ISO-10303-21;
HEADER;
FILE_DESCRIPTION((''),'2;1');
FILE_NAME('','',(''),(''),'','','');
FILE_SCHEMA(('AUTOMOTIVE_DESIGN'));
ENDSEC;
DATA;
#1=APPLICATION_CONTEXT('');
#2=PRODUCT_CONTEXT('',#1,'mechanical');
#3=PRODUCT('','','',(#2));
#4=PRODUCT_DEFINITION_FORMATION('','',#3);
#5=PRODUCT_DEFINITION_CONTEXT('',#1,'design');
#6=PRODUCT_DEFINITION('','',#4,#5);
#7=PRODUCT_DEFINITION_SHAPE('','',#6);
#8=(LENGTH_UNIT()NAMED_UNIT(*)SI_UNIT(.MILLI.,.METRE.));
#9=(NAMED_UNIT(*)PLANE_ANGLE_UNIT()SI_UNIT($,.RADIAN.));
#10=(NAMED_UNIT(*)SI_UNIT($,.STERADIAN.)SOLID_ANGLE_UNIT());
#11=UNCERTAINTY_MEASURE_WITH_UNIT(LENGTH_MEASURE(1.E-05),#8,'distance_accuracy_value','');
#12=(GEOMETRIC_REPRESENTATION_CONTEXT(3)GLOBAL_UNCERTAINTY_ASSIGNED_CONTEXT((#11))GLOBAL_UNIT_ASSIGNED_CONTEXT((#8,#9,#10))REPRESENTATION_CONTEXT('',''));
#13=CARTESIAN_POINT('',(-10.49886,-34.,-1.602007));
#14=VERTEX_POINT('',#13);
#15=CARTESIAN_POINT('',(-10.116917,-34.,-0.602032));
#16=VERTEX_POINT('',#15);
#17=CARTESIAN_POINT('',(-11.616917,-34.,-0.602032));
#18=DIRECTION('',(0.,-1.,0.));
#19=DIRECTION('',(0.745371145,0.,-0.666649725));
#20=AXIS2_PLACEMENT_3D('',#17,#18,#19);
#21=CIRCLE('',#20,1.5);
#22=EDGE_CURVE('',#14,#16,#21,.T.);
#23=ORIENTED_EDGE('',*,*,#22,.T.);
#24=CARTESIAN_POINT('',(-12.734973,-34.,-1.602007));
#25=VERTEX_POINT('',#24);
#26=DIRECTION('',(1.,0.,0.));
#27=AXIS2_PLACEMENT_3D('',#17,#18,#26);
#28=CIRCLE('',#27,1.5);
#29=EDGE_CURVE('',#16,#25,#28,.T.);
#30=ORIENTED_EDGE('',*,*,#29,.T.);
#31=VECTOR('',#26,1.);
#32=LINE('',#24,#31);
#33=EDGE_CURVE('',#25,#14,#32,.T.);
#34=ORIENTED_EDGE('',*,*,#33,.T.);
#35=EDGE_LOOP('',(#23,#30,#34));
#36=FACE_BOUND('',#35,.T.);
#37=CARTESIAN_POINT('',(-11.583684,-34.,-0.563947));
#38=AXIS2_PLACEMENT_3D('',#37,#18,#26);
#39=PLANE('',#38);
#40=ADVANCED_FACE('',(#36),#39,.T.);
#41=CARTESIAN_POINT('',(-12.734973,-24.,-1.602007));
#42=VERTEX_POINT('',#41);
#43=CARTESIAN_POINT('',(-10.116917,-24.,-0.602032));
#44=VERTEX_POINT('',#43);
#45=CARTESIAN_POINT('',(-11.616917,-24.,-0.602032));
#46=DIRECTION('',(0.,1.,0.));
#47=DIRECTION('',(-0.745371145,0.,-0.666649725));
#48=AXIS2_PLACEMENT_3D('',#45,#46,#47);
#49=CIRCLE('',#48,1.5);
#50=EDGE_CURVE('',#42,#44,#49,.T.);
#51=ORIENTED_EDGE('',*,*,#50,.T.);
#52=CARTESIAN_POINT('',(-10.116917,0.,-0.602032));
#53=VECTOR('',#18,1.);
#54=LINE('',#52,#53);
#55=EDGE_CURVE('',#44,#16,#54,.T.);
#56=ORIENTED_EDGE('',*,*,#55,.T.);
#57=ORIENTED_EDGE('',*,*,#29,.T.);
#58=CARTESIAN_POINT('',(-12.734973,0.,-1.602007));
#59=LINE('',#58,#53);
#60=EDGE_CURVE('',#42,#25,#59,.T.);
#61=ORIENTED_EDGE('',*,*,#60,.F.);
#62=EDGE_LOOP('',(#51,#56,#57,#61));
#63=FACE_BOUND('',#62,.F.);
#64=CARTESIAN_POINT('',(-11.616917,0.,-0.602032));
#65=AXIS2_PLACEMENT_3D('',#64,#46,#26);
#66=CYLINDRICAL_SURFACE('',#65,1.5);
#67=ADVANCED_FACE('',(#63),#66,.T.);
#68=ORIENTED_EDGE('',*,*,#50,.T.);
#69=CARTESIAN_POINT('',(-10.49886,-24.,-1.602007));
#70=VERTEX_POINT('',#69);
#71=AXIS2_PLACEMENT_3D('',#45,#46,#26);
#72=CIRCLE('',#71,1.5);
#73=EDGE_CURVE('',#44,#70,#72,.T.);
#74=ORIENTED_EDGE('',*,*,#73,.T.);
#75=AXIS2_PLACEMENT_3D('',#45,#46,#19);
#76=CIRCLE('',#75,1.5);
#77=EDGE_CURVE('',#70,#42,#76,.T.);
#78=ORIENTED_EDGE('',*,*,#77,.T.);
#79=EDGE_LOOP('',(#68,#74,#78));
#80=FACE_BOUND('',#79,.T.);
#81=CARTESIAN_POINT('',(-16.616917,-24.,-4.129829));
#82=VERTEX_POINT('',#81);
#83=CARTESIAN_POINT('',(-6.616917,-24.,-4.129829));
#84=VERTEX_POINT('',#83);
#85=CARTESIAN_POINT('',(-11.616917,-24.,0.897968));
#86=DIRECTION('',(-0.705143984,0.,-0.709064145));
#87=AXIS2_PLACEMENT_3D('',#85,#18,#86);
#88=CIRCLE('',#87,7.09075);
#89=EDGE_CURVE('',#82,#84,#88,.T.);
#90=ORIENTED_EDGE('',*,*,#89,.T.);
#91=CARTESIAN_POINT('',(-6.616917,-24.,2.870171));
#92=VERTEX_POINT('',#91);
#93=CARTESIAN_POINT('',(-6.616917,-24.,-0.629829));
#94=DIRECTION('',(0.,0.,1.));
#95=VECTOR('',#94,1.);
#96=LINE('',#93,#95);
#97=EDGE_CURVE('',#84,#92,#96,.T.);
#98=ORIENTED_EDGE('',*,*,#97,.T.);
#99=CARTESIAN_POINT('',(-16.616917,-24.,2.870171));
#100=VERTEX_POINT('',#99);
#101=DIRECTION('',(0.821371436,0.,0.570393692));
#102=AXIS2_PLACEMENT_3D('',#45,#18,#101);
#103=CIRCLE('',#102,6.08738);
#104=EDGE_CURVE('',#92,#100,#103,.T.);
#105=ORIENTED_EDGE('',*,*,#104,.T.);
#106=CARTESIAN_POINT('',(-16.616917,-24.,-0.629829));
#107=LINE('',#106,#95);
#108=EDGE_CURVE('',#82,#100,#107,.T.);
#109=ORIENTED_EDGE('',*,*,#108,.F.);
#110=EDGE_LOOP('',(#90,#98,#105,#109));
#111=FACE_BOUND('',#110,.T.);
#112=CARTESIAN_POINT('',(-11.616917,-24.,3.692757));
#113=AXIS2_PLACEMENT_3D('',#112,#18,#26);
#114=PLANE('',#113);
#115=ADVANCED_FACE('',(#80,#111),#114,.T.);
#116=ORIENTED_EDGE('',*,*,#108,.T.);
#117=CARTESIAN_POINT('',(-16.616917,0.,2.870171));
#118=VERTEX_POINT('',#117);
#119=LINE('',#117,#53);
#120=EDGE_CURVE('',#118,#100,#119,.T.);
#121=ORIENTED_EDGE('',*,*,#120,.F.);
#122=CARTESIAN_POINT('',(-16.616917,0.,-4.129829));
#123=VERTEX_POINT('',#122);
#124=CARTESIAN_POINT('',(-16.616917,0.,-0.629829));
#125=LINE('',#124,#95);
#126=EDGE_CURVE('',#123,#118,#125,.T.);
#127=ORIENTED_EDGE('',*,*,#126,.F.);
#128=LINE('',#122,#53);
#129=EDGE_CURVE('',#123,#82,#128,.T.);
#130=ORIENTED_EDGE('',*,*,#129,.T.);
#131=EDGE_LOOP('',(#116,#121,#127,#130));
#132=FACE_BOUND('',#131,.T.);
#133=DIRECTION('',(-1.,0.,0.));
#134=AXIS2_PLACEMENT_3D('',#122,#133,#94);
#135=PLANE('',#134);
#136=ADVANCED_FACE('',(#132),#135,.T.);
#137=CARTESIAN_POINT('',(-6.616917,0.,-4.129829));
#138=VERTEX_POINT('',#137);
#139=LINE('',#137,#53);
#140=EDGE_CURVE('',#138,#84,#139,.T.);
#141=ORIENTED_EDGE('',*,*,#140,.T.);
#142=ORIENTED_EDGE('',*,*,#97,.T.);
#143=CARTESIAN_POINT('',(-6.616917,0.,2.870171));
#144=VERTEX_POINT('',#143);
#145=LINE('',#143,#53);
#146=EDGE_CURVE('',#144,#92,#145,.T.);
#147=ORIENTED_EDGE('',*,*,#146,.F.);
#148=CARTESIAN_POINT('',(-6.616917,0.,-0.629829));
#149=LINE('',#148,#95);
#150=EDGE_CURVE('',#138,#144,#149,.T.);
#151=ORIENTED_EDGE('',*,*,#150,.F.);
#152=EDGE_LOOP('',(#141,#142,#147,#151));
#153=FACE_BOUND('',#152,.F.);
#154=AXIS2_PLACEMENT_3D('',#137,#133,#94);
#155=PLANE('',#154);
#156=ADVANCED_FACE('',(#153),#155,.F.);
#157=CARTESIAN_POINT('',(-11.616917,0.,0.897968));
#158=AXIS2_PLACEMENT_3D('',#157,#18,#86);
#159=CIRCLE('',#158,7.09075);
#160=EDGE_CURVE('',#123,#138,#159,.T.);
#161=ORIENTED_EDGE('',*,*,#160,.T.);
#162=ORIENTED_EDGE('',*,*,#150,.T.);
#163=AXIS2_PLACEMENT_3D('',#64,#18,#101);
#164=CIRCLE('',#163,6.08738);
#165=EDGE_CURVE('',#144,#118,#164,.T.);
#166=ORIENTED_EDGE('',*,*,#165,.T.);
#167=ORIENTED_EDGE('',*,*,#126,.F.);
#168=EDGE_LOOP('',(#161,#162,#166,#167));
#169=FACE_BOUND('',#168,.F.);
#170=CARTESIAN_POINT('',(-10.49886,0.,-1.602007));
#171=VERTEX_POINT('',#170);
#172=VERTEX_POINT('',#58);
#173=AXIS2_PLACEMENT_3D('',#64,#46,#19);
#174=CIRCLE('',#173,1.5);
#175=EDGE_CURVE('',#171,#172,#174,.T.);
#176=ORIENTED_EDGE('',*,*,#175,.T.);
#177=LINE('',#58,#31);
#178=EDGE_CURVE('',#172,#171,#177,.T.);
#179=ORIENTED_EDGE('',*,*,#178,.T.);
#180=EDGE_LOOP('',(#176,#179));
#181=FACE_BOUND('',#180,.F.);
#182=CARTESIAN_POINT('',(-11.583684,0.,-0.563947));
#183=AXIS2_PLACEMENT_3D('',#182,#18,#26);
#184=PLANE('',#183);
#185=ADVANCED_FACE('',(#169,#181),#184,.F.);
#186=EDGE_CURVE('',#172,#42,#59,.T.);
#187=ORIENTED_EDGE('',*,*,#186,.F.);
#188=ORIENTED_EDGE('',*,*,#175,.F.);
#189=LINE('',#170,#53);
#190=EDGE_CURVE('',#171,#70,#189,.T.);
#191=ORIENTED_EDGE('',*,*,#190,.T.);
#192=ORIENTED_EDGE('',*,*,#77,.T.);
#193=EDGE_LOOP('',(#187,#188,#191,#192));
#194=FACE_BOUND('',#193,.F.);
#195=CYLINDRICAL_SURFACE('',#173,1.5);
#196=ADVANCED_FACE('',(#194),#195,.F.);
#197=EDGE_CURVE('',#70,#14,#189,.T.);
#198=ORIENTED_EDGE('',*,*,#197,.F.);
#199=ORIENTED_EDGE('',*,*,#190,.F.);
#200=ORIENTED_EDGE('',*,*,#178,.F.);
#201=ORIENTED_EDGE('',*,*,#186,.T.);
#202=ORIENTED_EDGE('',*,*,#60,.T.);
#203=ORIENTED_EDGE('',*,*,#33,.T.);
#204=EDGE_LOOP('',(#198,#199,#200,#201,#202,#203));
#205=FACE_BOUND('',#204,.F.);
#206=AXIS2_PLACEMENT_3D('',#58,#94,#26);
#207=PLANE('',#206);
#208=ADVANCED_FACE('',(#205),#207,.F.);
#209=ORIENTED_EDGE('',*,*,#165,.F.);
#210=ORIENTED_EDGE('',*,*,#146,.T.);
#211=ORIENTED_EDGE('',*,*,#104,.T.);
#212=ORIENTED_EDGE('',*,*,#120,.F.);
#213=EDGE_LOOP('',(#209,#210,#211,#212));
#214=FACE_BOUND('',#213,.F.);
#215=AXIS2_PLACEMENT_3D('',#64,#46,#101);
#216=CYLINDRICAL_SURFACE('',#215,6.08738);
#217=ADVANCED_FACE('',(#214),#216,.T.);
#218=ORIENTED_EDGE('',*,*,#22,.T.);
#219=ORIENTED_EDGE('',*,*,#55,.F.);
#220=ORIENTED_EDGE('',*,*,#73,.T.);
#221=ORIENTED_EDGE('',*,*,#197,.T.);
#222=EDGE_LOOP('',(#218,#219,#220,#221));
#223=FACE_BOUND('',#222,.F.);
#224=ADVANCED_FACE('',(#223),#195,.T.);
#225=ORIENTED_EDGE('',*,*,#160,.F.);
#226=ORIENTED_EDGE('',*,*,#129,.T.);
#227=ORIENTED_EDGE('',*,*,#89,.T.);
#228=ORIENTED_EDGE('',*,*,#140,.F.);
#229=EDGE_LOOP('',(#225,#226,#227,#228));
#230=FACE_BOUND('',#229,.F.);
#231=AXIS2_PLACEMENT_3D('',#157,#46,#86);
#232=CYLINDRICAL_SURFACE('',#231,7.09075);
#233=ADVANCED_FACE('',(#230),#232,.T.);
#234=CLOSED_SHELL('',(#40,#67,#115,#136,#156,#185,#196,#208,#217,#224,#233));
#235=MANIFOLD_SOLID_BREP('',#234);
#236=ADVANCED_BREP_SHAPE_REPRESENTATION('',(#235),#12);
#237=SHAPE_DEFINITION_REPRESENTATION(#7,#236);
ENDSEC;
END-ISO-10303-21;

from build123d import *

# Parameters (mm, degrees)
F0_W     = 10
F0_H     = 7
F1_DEPTH = 24
F2_DEPTH = 34


with BuildPart() as f1:
    # F0 (on Front) → F1 (new body)
    with BuildSketch(Plane.XZ):
        with BuildLine():
            ThreePointArc((-6.6169165431, 2.8701706491), (-11.6169165431, 5.485347467), (-16.6169165431, 2.8701706491))
            Line((-16.6169165431, 2.8701706491), (-6.6169165431, 2.8701706491))
        make_face()
        with BuildLine():
            Line((-6.6169165431, -4.1298293509), (-16.6169165431, -4.1298293509))
            ThreePointArc((-16.6169165431, -4.1298293509), (-11.6169165431, -6.1927828871), (-6.6169165431, -4.1298293509))
        make_face()
        with Locations((-11.6169165431, -0.6298293509)):
            Rectangle(F0_W, F0_H)
        with BuildLine():
            ThreePointArc((-12.7349732604, -1.6020070586), (-12.1521337532, 0.7992321504), (-10.1169165431, -0.6020324705))
            ThreePointArc((-10.1169165431, -0.6020324705), (-10.2156519221, -1.1372496806), (-10.4988598258, -1.6020070586))
            ThreePointArc((-10.4988598258, -1.6020070586), (-11.6169165431, -2.1020324705), (-12.7349732604, -1.6020070586))
        make_face(mode=Mode.SUBTRACT)
    extrude(amount=F1_DEPTH)

    # F0 (on Front) → F2 (join)
    with BuildSketch(Plane.XZ):
        with BuildLine():
            ThreePointArc((-10.4988598258, -1.6020070586), (-10.2156519221, -1.1372496806), (-10.1169165431, -0.6020324705))
            ThreePointArc((-10.1169165431, -0.6020324705), (-12.1521337532, 0.7992321504), (-12.7349732604, -1.6020070586))
            Line((-12.7349732604, -1.6020070586), (-11.6097875087, -1.6020070586))
            Line((-11.6097875087, -1.6020070586), (-10.4988598258, -1.6020070586))
        make_face()
    extrude(amount=F2_DEPTH)


solid = f1.part
